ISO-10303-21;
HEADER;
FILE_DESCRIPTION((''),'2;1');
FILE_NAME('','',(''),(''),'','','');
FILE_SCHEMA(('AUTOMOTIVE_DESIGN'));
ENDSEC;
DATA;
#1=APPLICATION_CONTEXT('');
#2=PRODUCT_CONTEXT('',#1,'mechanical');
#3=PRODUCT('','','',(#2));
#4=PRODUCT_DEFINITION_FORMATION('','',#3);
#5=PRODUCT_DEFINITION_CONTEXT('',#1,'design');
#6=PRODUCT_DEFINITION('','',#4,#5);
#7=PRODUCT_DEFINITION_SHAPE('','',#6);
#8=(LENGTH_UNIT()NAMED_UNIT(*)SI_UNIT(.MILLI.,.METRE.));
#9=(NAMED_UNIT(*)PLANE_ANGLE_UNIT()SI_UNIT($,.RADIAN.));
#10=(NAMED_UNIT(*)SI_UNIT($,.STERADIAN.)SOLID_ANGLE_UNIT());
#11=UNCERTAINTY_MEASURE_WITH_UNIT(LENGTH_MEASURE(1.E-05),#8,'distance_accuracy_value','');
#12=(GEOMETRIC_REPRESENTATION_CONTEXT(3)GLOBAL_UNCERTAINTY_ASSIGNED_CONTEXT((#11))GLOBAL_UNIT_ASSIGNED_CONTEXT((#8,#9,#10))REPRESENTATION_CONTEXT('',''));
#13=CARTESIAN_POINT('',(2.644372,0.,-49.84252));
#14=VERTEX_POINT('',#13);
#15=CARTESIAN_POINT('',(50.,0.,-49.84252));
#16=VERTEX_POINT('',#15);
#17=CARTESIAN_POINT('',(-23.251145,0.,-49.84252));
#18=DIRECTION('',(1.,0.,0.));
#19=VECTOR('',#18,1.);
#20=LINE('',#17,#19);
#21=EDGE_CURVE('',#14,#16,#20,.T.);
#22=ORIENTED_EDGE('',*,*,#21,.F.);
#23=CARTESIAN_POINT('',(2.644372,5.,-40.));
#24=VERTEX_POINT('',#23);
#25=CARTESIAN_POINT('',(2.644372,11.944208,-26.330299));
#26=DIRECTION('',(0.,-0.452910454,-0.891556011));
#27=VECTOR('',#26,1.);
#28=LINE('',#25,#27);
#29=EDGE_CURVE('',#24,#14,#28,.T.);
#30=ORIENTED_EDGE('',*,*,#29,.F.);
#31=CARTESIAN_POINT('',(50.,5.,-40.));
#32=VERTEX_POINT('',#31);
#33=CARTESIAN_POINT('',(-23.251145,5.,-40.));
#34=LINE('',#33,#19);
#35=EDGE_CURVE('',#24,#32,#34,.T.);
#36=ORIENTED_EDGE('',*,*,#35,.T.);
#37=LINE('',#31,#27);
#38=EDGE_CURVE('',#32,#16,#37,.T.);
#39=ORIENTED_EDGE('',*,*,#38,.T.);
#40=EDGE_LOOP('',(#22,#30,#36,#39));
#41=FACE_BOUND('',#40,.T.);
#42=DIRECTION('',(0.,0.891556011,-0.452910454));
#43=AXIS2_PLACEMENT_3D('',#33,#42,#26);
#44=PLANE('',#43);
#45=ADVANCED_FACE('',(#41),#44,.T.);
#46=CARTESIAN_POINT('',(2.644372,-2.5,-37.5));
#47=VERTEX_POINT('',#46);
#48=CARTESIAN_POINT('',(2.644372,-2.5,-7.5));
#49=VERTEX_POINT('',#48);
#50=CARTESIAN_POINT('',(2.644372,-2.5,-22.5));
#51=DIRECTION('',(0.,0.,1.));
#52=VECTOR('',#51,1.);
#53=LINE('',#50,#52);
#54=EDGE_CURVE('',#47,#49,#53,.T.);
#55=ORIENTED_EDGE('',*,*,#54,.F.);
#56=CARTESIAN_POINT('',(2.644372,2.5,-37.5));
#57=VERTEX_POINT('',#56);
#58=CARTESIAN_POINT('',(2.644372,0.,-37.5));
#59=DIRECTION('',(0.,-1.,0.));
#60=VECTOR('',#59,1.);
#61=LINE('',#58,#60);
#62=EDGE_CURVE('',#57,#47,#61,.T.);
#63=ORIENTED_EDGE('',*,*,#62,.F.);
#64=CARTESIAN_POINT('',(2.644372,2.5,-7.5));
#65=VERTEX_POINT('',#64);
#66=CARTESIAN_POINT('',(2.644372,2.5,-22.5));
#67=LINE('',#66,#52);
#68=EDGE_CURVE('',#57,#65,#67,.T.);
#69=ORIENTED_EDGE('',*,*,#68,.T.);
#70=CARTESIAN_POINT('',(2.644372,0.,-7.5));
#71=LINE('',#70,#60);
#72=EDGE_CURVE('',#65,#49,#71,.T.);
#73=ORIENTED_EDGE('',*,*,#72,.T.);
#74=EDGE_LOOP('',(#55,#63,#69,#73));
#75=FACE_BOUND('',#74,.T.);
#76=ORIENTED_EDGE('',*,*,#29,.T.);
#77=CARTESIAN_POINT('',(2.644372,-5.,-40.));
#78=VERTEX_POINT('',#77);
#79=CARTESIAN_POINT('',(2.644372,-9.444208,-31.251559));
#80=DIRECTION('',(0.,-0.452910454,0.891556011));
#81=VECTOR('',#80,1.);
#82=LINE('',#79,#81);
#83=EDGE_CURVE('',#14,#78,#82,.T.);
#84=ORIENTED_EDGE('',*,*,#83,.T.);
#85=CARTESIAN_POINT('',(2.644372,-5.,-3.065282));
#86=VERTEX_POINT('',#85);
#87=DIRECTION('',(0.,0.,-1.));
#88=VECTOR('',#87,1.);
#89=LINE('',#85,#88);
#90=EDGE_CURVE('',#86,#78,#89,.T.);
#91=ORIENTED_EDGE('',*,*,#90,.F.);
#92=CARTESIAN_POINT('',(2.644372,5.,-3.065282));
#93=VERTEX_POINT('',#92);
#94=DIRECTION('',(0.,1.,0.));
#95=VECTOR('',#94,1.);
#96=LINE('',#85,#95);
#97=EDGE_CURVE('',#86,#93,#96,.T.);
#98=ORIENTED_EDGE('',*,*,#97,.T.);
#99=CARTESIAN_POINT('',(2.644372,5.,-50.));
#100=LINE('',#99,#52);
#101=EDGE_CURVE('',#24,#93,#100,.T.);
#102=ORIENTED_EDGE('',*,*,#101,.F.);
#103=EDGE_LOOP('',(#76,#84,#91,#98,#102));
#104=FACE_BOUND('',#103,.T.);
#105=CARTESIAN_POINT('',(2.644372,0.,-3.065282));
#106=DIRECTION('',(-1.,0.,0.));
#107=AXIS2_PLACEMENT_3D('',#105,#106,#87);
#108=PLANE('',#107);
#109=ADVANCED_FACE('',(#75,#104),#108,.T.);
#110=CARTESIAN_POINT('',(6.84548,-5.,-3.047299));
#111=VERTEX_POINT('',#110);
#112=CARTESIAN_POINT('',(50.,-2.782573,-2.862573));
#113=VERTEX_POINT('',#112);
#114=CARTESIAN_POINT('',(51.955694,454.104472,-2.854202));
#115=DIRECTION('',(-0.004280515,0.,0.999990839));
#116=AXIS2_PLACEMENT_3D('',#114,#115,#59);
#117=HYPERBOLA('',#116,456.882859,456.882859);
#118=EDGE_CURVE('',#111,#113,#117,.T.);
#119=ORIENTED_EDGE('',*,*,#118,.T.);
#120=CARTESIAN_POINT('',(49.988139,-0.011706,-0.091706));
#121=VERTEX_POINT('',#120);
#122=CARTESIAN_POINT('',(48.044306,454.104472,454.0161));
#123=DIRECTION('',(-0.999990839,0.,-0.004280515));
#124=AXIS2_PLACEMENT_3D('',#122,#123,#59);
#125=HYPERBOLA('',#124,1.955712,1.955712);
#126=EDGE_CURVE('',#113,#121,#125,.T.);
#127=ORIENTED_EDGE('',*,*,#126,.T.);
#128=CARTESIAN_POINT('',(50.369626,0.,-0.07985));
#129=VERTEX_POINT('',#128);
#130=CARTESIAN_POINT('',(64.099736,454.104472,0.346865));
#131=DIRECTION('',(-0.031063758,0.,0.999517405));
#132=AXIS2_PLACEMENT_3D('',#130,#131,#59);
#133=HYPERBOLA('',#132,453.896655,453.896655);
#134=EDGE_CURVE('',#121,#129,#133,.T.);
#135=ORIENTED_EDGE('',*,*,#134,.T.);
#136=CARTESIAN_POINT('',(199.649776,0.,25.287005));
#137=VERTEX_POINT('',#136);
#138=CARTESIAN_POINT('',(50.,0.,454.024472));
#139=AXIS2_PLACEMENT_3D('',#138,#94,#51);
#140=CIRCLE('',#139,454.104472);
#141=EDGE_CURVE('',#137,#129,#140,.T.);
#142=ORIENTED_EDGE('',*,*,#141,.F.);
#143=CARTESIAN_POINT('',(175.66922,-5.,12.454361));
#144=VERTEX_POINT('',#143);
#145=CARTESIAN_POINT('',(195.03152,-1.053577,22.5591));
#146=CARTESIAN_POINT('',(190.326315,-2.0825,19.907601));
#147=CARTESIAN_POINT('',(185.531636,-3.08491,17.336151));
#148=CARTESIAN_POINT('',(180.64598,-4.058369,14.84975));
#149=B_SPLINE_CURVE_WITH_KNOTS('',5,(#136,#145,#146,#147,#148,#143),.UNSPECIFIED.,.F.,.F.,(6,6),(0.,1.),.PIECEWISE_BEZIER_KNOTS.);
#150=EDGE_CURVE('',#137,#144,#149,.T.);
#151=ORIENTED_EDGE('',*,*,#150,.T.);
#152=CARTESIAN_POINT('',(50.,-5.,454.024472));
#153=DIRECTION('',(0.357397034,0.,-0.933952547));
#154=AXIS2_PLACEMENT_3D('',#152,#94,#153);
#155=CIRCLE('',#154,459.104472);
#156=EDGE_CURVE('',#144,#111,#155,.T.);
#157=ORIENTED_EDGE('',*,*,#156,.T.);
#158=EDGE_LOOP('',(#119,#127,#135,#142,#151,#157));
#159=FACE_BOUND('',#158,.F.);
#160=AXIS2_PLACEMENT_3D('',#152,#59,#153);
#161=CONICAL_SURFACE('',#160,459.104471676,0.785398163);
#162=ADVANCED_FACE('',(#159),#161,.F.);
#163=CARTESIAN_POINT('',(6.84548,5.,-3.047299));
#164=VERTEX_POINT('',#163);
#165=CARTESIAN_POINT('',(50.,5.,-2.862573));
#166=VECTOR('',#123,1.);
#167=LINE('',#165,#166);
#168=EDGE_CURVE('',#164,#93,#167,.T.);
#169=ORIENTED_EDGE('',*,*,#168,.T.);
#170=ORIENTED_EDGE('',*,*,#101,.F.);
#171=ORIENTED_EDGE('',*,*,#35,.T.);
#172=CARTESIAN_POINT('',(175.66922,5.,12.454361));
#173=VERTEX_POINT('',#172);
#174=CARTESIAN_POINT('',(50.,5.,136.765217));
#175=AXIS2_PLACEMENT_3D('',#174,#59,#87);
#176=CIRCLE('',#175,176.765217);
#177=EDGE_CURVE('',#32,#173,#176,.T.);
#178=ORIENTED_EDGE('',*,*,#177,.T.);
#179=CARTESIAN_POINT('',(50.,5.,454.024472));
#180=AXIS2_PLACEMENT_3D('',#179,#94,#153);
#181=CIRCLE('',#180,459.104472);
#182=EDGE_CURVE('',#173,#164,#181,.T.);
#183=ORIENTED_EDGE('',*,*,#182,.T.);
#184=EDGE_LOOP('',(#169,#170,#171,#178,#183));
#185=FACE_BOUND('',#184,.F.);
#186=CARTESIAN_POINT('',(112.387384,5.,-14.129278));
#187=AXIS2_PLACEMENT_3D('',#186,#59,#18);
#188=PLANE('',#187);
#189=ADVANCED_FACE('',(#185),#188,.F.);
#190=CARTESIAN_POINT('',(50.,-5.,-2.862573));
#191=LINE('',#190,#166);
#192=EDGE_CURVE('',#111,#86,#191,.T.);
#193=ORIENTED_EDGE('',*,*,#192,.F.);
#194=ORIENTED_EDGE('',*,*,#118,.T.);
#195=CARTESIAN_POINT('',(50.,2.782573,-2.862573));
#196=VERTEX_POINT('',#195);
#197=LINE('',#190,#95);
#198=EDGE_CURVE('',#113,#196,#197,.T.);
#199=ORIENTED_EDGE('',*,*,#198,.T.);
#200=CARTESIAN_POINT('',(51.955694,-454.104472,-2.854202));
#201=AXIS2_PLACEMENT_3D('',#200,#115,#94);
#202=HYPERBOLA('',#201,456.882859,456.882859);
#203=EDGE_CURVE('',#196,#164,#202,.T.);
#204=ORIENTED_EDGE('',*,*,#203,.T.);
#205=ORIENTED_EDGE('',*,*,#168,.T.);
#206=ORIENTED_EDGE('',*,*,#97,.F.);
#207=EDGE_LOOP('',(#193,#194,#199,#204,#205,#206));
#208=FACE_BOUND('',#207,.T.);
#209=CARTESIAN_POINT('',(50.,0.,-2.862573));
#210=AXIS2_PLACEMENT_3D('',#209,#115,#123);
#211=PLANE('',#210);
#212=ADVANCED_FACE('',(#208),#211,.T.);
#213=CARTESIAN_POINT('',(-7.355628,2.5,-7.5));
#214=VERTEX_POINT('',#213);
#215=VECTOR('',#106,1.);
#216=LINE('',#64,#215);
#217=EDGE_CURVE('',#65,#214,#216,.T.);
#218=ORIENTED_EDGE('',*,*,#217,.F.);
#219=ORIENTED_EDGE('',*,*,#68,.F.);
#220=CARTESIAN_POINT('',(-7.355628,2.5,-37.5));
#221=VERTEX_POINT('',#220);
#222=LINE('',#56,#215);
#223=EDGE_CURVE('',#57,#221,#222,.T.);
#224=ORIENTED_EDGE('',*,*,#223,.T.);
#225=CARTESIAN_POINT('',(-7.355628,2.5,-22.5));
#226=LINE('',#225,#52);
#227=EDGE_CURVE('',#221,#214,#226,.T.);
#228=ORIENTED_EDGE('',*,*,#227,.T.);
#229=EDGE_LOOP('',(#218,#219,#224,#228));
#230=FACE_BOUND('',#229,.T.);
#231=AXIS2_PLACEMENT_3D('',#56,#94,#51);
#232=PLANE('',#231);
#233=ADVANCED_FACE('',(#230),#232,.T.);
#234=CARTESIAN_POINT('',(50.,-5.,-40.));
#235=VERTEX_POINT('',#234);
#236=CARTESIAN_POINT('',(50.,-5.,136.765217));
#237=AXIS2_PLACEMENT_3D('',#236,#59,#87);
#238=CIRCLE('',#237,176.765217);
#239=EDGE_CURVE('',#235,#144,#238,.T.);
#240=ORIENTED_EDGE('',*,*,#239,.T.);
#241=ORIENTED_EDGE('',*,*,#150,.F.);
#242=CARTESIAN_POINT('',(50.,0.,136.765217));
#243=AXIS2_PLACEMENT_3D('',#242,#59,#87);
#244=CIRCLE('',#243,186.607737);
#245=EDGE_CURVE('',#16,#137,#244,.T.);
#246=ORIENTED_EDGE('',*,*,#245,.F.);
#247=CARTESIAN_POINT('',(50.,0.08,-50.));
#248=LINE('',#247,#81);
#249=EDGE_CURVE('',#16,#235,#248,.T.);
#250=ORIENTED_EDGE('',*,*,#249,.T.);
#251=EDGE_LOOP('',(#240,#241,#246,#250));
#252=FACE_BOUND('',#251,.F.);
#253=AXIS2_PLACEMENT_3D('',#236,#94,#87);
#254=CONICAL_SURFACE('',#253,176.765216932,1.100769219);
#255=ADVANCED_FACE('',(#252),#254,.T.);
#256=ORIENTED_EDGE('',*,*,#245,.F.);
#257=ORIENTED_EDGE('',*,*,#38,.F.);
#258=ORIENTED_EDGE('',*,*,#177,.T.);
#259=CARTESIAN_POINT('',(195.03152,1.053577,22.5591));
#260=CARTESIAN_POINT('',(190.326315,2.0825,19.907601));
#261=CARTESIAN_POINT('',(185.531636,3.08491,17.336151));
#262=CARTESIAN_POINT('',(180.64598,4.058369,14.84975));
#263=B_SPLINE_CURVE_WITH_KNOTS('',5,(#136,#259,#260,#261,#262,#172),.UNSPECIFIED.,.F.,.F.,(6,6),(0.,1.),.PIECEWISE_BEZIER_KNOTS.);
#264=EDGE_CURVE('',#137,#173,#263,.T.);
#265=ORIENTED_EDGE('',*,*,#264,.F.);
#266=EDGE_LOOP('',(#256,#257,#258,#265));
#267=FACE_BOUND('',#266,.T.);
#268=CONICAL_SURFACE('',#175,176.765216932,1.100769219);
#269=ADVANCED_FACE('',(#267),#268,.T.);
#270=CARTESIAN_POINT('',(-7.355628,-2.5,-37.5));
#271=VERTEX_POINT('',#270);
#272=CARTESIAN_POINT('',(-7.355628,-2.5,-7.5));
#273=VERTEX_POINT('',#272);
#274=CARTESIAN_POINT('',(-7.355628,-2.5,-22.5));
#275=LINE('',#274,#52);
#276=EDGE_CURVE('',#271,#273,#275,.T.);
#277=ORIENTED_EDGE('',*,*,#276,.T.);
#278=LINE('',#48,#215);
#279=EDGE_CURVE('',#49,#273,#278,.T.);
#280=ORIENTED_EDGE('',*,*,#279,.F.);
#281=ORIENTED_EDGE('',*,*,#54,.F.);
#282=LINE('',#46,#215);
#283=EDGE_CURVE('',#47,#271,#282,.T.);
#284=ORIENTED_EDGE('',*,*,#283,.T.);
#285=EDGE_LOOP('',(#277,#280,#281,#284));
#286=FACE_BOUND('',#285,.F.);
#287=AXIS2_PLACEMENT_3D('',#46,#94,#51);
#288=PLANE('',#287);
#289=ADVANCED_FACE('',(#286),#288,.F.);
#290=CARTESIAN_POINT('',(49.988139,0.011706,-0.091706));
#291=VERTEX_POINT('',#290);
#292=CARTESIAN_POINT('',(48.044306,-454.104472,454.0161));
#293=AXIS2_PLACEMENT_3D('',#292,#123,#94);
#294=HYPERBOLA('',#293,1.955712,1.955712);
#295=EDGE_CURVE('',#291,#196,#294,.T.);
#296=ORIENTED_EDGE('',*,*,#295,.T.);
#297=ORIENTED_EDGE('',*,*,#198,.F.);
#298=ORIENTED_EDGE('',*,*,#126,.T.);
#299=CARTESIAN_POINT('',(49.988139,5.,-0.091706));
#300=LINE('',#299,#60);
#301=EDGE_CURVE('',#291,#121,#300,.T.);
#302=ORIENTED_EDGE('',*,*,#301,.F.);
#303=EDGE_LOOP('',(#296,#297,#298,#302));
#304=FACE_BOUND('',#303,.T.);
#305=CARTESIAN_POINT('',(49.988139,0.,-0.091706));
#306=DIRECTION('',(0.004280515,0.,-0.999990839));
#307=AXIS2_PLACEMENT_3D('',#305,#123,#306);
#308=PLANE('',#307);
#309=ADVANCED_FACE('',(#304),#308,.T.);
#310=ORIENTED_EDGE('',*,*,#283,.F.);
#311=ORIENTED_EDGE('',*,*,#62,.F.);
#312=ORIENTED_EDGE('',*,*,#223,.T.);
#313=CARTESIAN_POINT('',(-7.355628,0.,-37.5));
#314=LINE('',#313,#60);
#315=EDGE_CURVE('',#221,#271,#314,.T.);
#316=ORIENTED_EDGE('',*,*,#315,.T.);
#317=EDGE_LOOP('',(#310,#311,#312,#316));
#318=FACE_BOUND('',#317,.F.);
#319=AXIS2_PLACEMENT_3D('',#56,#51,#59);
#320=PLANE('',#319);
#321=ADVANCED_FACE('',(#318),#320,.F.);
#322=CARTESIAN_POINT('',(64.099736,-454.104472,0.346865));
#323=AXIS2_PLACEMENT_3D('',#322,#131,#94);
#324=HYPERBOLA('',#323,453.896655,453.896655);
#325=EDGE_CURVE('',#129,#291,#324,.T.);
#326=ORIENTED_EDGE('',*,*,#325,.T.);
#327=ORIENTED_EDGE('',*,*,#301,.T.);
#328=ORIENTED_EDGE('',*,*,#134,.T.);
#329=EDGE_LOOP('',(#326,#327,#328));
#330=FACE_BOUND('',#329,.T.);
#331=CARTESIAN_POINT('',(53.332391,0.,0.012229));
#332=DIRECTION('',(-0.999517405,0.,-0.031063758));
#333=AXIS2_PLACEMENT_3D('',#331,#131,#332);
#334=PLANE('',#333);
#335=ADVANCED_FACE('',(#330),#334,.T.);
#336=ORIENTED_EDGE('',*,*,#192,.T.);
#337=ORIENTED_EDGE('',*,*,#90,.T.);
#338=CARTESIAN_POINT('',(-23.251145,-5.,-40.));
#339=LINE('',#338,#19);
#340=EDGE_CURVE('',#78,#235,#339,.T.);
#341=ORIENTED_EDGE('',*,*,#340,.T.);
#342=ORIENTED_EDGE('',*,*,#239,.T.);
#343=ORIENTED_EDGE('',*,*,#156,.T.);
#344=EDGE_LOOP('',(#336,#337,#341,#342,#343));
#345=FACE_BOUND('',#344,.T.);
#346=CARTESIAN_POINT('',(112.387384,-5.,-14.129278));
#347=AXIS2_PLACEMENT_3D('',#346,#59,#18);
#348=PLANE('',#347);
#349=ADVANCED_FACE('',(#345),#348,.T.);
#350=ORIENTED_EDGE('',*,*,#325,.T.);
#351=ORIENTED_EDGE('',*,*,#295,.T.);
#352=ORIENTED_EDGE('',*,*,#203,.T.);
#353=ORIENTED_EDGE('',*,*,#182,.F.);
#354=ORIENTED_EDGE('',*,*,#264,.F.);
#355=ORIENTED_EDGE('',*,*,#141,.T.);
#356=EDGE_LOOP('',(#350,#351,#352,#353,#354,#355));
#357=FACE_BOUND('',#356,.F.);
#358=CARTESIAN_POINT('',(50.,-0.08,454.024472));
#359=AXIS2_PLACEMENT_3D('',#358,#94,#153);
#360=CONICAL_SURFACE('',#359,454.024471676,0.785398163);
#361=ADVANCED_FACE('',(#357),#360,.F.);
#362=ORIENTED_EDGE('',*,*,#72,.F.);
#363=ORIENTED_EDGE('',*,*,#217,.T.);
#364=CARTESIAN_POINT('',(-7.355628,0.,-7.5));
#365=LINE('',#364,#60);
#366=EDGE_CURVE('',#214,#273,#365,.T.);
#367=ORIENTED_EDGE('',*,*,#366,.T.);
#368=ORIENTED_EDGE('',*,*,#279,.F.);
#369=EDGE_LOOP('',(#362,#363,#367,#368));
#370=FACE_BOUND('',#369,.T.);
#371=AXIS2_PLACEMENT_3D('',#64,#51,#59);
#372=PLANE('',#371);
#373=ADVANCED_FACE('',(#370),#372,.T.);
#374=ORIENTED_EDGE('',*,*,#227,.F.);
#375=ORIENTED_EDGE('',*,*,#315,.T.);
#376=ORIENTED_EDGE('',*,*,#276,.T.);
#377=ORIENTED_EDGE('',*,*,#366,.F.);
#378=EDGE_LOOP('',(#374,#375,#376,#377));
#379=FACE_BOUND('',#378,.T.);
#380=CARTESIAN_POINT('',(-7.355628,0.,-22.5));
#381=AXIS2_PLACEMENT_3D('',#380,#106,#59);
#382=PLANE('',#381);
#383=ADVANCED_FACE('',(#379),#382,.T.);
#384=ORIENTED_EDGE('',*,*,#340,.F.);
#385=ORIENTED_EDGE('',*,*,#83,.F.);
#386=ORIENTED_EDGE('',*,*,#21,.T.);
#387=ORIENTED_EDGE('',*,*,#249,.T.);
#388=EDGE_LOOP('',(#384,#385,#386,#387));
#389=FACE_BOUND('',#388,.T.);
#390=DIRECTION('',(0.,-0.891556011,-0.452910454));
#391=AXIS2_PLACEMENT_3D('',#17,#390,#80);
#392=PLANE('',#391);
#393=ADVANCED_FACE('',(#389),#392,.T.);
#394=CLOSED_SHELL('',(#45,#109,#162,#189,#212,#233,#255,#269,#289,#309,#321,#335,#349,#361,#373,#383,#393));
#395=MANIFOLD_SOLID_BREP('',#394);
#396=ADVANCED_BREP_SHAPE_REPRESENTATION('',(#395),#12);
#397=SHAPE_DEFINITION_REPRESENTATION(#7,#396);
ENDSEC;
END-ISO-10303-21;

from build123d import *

# Parameters (mm, degrees)
F1_DEPTH    = 5
F2_DEPTH    = 5
F3_T2_ANGLE = 28.7632092252
F3_T4_ANGLE = 28.7632092252
F4_T1_DEPTH = 73.2511453801
F4_T4_ANGLE = 58.5309171072
F4_T6_ANGLE = 58.5309171072
F5_W        = 5
F5_H        = 30
F6_DEPTH    = 10


# Not quite as in the source:
# - a fillet or chamfer that OpenCascade refuses, or shapes differently, is made with other operations: its cross-section is extruded or revolved along the edge and cut away or added


with BuildPart() as f1:
    # F0 (on Front) → F1 (new body, symmetric)
    with BuildSketch(Plane.XZ):
        with BuildLine():
            Line((2.6443716172, -3.0652818078), (2.6443716172, -47.137426524))
            Line((2.6443716172, -47.137426524), (50, -47.137426524))
            ThreePointArc((50, -47.137426524), (128.4023811423, -29.5875675392), (191.8408584792, 19.7124376571))
            ThreePointArc((191.8408584792, 19.7124376571), (121.8130563717, 2.8164742266), (50, -2.862573476))
            Line((50, -2.862573476), (2.6443716172, -3.0652818078))
        make_face()
    extrude(amount=F1_DEPTH, both=True)

    # F0 (on Front) → F2 (join, symmetric)
    with BuildSketch(Plane.XZ):
        with BuildLine():
            Line((2.6443716172, -50), (50, -50))
            ThreePointArc((50, -50), (133.9633393999, -30.0622505081), (200, 25.494168336))
            ThreePointArc((200, 25.494168336), (127.7176805201, 6.7011176968), (53.3323914074, 0.0122294972))
            Line((53.3323914074, 0.0122294972), (50, -2.862573476))
            ThreePointArc((50, -2.862573476), (121.8130563717, 2.8164742266), (191.8408584792, 19.7124376571))
            ThreePointArc((191.8408584792, 19.7124376571), (128.4023811423, -29.5875675392), (50, -47.137426524))
            Line((50, -47.137426524), (2.6443716172, -47.137426524))
            Line((2.6443716172, -47.137426524), (2.6443716172, -50))
        make_face()
        Polygon((50, -2.862573476), (53.3323914074, 0.0122294972), (49.9881391504, -0.0917057033), align=None)
        with BuildLine():
            Line((2.6443716172, -3.0652818078), (2.6443716172, -47.137426524))
            Line((2.6443716172, -47.137426524), (50, -47.137426524))
            ThreePointArc((50, -47.137426524), (128.4023811423, -29.5875675392), (191.8408584792, 19.7124376571))
            ThreePointArc((191.8408584792, 19.7124376571), (121.8130563717, 2.8164742266), (50, -2.862573476))
            Line((50, -2.862573476), (2.6443716172, -3.0652818078))
        make_face()
    extrude(amount=F2_DEPTH, both=True)

    # F3: chamfer of 5.08 on 2 edges, made by hand

    # F3_s1 → F3_t2 (revolve, cut)
    with BuildSketch(Plane(origin=(195.1630456204, 0, 74.6833379712), x_dir=(0, 1, 0), z_dir=(0.9339525469, 0, 0.3573970343))):
        Polygon((-5, -52.9370117112), (0.08, -47.8570117112), (-5, -47.8570117112), align=None)
    revolve(axis=Axis((50, -5, 454.0244716756), (0, 1, 0)), revolution_arc=F3_T2_ANGLE, mode=Mode.SUBTRACT)

    # F3_s3 → F3_t4 (revolve, cut)
    with BuildSketch(Plane(origin=(195.1630456204, 0, 74.6833379712), x_dir=(0, 1, 0), z_dir=(0.9339525469, 0, 0.3573970343))):
        Polygon((-0.08, -47.8570117112), (5, -52.9370117112), (5, -47.8570117112), align=None)
    revolve(axis=Axis((50, 5, 454.0244716756), (0, 1, 0)), revolution_arc=F3_T4_ANGLE, mode=Mode.SUBTRACT)

    # F4: chamfer of 5.08 x 10 on 2 edges, made by hand

    # F4_s2 → F4_t1 (cut)
    with BuildSketch(Plane.YZ.offset(-23.2511453801)):
        Polygon((0.08, -50), (-5, -40), (-5, -50), align=None)
        Polygon((5, -40), (-0.08, -50), (5, -50), align=None)
    extrude(amount=F4_T1_DEPTH, mode=Mode.SUBTRACT)

    # F4_s3 → F4_t4 (revolve, cut)
    with BuildSketch(Plane.YZ.offset(50)):
        Polygon((5, -40), (-0.08, -50), (5, -50), align=None)
    revolve(axis=Axis((50, 5, 136.7652169319), (0, -1, 0)), revolution_arc=F4_T4_ANGLE, mode=Mode.SUBTRACT)

    # F4_s5 → F4_t6 (revolve, cut)
    with BuildSketch(Plane.YZ.offset(50)):
        Polygon((-5, -40), (0.08, -50), (-5, -50), align=None)
    revolve(axis=Axis((50, -5, 136.7652169319), (0, -1, 0)), revolution_arc=F4_T6_ANGLE, mode=Mode.SUBTRACT)

    # F5 (on face) → F6 (join)
    with BuildSketch(Plane(origin=(2.6443716172, 0, 0), x_dir=(0, -1, 0), z_dir=(-1, 0, 0))):
        with Locations((0, -22.5)):
            Rectangle(F5_W, F5_H)
    extrude(amount=F6_DEPTH)


solid = f1.part
